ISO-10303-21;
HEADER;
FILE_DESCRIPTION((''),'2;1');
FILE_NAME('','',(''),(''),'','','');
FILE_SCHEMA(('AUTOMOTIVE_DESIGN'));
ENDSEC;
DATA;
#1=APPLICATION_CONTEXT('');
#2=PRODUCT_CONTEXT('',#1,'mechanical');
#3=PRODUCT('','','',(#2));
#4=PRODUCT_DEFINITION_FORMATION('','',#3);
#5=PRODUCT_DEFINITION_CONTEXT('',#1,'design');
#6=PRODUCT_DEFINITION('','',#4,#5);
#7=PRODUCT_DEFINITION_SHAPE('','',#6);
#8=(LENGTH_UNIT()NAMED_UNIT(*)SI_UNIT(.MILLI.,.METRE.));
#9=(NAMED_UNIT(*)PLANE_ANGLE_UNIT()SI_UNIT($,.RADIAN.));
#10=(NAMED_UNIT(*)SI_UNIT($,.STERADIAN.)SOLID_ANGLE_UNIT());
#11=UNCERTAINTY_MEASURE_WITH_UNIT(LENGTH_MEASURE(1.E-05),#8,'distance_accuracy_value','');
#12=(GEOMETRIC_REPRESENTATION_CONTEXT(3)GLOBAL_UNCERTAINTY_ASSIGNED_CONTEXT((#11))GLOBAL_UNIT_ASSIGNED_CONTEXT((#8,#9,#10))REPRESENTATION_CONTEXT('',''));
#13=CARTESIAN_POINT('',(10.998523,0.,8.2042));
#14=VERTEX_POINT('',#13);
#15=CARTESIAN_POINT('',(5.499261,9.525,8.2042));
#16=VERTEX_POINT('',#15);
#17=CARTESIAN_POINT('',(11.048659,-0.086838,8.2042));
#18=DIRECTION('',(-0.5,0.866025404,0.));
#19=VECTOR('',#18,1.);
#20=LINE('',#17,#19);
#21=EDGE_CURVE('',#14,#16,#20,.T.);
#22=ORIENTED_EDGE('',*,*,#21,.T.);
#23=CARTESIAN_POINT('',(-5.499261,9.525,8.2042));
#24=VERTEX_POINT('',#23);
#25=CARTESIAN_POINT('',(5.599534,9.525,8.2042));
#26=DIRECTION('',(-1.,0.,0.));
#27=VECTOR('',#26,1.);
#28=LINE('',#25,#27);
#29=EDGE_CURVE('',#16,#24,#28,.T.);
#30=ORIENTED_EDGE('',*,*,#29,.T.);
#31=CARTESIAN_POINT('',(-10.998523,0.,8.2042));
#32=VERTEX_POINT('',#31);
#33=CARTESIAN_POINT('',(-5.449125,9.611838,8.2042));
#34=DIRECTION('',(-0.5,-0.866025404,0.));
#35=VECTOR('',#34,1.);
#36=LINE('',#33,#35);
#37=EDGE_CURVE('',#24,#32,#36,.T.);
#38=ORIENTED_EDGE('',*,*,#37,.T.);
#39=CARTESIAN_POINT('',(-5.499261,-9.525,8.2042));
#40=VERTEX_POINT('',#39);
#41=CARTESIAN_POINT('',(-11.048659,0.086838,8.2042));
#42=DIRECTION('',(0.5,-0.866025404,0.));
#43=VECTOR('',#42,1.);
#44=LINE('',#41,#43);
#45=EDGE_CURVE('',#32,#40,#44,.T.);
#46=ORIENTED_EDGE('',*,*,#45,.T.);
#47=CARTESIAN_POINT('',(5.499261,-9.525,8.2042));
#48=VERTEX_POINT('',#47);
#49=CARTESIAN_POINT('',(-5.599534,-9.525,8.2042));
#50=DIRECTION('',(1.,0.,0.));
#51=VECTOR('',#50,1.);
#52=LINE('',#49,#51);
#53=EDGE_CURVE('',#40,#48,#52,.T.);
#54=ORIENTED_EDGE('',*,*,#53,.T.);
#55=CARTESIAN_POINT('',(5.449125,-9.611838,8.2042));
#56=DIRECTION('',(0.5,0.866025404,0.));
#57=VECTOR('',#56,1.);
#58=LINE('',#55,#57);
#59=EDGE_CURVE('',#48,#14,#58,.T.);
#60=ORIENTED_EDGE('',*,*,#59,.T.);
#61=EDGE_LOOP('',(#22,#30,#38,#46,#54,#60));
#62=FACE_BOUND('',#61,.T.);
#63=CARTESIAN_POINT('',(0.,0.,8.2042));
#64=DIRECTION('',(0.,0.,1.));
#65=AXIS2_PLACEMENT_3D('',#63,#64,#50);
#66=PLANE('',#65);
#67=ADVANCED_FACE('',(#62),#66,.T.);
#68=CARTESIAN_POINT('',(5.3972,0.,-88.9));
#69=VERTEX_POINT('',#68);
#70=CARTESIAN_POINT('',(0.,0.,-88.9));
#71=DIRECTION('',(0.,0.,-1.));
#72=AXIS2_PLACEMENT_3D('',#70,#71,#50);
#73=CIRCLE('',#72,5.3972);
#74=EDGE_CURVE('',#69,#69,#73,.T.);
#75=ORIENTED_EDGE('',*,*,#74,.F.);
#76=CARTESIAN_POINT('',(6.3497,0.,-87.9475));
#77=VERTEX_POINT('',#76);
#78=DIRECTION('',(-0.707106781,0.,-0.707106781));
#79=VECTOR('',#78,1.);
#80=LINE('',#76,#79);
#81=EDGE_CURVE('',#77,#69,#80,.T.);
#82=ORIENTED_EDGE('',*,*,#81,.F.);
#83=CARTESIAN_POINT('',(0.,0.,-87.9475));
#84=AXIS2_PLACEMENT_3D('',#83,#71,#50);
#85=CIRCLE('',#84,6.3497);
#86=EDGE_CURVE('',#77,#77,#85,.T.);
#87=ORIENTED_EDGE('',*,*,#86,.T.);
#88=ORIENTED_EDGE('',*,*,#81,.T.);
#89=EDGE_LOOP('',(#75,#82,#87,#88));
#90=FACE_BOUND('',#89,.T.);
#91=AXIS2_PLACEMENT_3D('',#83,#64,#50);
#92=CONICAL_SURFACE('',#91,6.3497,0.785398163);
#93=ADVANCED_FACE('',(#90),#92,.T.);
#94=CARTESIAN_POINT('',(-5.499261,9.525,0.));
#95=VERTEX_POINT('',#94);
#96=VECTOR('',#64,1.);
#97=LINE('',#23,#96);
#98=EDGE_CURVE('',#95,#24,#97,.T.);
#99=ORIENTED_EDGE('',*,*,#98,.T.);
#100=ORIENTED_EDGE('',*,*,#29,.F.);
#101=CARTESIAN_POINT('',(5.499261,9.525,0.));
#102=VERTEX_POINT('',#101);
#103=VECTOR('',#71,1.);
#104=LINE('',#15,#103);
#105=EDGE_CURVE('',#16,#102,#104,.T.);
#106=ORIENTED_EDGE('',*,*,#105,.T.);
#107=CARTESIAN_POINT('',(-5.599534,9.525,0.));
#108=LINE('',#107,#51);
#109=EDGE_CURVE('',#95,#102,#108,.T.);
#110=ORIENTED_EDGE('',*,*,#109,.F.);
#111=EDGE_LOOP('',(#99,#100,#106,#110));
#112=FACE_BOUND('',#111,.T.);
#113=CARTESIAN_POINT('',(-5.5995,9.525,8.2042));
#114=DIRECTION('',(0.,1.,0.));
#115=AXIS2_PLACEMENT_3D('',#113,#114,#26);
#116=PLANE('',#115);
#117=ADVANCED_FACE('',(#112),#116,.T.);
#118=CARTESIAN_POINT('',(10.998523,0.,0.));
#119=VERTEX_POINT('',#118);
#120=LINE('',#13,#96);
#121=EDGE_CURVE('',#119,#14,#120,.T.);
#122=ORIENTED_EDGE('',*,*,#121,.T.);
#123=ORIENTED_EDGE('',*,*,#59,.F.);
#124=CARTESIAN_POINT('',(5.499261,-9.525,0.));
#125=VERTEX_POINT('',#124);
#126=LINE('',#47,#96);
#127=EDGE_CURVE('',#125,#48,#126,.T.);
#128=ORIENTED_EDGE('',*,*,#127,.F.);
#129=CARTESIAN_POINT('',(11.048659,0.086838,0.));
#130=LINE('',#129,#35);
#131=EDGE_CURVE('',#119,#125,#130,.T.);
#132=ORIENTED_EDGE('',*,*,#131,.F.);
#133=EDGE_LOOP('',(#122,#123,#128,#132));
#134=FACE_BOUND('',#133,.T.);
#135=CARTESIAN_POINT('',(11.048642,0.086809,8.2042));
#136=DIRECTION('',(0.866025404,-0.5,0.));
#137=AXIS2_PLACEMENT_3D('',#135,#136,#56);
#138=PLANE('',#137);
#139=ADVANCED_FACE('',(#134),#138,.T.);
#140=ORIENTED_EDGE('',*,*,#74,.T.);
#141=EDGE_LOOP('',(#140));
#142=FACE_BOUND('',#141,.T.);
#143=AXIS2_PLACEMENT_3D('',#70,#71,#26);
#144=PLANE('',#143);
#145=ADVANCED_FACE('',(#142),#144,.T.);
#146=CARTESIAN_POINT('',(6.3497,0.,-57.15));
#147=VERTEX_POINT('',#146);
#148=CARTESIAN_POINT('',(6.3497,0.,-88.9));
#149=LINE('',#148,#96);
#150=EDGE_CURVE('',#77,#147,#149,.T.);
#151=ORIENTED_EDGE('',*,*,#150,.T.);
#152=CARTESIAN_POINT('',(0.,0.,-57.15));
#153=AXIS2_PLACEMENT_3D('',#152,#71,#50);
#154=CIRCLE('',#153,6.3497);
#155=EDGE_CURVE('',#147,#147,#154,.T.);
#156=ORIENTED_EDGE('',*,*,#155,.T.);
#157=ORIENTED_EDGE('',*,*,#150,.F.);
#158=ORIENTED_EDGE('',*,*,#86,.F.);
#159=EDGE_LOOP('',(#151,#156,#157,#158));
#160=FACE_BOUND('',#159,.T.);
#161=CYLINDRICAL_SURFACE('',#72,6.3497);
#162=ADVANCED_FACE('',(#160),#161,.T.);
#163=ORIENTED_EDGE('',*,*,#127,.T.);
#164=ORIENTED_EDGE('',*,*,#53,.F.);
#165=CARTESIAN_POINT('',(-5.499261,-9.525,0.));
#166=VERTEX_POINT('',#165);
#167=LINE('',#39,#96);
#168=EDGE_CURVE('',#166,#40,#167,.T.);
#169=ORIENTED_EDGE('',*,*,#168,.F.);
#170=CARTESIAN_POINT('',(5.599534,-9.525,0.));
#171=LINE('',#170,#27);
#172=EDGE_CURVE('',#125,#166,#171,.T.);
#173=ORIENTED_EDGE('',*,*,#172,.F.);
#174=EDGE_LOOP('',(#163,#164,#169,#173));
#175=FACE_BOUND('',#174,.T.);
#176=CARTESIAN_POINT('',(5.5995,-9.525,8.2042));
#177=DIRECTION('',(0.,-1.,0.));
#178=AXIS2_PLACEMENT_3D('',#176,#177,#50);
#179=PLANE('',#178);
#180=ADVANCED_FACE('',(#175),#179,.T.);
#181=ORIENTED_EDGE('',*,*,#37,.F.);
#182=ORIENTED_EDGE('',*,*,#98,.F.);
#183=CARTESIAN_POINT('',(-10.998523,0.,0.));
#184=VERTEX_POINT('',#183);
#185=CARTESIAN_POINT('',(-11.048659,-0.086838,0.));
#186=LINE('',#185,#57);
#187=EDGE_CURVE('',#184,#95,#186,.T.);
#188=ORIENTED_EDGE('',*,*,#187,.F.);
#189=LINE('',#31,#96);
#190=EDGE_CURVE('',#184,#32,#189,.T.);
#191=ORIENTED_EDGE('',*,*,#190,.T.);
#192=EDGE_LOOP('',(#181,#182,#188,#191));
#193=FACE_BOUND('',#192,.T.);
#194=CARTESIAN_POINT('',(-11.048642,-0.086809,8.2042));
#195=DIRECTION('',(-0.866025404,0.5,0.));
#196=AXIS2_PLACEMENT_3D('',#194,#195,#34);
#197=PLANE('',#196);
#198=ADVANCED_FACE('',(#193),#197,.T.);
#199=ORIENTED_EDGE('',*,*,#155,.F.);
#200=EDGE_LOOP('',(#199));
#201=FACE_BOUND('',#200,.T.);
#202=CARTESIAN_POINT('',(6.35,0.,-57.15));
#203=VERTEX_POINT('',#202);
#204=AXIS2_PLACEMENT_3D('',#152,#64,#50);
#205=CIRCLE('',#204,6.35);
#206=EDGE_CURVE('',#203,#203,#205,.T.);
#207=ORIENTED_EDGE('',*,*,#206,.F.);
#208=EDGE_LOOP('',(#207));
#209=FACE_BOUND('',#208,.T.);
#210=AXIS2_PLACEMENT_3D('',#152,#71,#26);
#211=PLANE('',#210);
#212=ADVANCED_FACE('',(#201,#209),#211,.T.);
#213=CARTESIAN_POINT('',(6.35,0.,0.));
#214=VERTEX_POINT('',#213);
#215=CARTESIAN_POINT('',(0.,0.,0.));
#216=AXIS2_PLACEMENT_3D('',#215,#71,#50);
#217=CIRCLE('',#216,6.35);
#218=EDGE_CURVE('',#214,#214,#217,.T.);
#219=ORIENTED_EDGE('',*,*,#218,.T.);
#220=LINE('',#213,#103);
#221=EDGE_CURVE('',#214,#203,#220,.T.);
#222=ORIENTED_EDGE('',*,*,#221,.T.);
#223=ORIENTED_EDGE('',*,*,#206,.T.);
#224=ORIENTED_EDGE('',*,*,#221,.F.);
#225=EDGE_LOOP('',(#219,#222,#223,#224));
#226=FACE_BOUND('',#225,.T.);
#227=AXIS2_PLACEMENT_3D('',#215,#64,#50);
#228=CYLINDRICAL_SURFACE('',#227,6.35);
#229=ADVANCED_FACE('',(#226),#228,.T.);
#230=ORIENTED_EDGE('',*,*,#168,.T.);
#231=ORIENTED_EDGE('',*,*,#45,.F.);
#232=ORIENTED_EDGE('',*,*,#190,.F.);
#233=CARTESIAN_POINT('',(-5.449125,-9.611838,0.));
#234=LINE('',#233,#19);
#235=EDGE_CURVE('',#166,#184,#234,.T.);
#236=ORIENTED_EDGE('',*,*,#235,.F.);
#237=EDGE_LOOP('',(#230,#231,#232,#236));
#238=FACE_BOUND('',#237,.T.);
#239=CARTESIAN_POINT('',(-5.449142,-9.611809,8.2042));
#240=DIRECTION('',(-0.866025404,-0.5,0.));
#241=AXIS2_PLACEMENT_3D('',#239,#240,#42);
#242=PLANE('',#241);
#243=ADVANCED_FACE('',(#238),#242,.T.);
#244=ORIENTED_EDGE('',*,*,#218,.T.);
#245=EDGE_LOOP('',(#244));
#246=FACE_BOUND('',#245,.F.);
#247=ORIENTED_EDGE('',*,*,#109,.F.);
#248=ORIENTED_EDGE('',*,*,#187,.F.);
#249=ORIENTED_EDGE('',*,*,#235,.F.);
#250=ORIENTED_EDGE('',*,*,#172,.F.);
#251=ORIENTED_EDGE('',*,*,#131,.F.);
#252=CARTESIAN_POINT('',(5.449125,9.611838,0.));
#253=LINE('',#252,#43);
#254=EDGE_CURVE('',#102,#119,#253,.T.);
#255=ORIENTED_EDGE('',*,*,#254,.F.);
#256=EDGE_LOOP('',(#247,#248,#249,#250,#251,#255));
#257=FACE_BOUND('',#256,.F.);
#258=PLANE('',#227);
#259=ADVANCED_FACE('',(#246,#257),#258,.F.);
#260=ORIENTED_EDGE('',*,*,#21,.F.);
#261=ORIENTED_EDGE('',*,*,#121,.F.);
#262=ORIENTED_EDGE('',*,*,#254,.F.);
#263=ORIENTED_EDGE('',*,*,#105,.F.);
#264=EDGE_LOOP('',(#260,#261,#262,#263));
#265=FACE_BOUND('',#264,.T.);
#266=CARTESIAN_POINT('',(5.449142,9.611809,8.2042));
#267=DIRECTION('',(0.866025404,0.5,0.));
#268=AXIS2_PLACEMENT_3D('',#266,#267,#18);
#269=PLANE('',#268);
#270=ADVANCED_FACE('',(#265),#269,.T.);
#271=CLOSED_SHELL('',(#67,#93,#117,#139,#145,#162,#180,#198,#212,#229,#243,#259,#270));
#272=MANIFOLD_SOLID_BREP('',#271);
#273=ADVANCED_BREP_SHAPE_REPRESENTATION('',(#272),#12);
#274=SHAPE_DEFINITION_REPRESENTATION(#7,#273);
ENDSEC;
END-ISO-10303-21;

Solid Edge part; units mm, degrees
sketch "Sketch1" plane through (0, 0, 0) normal (0, 0, 1) x (1, 0, 0)
  circle A0 centre (0, 0) radius 11.049
  dimension "D1" = 22.098
extrude "Protrusion1" add sketch "Sketch1" along normal blind 8.2042
sketch "Sketch2" plane through (0, 0, 0) normal (0, 0, -1) x (1, 0, 0)
  circle A0 centre (0, 0) radius 6.35
extrude "Protrusion2" add sketch "Sketch2" along normal blind 88.9
sketch "Sketch3" plane through (0, 0, -88.9) normal (0, 0, -1) x (1, 0, 0)
  circle A0 centre (0, 0) radius 6.3497
extrude "Cutout1" cut sketch "Sketch3" against normal blind 31.75 flip side to cut
chamfer "Chamfer_1" distance 0.9525 angle 45 1 edges at (-6.3497, 0, -88.9)
sketch "Sketch4" plane through (0, 0, 8.2042) normal (0, 0, 1) x (1, 0, 0)
  line L0 (-5.5995, 9.525) -> (5.5995, 9.525)
  dimension "D1" = 19.05
extrude "Cutout2" cut sketch "Sketch4" against normal up to next material side at (0, 9.575, 8.2042)
pattern_circular "Pattern1" count 6 over 360 about axis through (0, 0, 8.2042) along (0, 0, 1) of "Cutout2"
properties part number "24100035"
